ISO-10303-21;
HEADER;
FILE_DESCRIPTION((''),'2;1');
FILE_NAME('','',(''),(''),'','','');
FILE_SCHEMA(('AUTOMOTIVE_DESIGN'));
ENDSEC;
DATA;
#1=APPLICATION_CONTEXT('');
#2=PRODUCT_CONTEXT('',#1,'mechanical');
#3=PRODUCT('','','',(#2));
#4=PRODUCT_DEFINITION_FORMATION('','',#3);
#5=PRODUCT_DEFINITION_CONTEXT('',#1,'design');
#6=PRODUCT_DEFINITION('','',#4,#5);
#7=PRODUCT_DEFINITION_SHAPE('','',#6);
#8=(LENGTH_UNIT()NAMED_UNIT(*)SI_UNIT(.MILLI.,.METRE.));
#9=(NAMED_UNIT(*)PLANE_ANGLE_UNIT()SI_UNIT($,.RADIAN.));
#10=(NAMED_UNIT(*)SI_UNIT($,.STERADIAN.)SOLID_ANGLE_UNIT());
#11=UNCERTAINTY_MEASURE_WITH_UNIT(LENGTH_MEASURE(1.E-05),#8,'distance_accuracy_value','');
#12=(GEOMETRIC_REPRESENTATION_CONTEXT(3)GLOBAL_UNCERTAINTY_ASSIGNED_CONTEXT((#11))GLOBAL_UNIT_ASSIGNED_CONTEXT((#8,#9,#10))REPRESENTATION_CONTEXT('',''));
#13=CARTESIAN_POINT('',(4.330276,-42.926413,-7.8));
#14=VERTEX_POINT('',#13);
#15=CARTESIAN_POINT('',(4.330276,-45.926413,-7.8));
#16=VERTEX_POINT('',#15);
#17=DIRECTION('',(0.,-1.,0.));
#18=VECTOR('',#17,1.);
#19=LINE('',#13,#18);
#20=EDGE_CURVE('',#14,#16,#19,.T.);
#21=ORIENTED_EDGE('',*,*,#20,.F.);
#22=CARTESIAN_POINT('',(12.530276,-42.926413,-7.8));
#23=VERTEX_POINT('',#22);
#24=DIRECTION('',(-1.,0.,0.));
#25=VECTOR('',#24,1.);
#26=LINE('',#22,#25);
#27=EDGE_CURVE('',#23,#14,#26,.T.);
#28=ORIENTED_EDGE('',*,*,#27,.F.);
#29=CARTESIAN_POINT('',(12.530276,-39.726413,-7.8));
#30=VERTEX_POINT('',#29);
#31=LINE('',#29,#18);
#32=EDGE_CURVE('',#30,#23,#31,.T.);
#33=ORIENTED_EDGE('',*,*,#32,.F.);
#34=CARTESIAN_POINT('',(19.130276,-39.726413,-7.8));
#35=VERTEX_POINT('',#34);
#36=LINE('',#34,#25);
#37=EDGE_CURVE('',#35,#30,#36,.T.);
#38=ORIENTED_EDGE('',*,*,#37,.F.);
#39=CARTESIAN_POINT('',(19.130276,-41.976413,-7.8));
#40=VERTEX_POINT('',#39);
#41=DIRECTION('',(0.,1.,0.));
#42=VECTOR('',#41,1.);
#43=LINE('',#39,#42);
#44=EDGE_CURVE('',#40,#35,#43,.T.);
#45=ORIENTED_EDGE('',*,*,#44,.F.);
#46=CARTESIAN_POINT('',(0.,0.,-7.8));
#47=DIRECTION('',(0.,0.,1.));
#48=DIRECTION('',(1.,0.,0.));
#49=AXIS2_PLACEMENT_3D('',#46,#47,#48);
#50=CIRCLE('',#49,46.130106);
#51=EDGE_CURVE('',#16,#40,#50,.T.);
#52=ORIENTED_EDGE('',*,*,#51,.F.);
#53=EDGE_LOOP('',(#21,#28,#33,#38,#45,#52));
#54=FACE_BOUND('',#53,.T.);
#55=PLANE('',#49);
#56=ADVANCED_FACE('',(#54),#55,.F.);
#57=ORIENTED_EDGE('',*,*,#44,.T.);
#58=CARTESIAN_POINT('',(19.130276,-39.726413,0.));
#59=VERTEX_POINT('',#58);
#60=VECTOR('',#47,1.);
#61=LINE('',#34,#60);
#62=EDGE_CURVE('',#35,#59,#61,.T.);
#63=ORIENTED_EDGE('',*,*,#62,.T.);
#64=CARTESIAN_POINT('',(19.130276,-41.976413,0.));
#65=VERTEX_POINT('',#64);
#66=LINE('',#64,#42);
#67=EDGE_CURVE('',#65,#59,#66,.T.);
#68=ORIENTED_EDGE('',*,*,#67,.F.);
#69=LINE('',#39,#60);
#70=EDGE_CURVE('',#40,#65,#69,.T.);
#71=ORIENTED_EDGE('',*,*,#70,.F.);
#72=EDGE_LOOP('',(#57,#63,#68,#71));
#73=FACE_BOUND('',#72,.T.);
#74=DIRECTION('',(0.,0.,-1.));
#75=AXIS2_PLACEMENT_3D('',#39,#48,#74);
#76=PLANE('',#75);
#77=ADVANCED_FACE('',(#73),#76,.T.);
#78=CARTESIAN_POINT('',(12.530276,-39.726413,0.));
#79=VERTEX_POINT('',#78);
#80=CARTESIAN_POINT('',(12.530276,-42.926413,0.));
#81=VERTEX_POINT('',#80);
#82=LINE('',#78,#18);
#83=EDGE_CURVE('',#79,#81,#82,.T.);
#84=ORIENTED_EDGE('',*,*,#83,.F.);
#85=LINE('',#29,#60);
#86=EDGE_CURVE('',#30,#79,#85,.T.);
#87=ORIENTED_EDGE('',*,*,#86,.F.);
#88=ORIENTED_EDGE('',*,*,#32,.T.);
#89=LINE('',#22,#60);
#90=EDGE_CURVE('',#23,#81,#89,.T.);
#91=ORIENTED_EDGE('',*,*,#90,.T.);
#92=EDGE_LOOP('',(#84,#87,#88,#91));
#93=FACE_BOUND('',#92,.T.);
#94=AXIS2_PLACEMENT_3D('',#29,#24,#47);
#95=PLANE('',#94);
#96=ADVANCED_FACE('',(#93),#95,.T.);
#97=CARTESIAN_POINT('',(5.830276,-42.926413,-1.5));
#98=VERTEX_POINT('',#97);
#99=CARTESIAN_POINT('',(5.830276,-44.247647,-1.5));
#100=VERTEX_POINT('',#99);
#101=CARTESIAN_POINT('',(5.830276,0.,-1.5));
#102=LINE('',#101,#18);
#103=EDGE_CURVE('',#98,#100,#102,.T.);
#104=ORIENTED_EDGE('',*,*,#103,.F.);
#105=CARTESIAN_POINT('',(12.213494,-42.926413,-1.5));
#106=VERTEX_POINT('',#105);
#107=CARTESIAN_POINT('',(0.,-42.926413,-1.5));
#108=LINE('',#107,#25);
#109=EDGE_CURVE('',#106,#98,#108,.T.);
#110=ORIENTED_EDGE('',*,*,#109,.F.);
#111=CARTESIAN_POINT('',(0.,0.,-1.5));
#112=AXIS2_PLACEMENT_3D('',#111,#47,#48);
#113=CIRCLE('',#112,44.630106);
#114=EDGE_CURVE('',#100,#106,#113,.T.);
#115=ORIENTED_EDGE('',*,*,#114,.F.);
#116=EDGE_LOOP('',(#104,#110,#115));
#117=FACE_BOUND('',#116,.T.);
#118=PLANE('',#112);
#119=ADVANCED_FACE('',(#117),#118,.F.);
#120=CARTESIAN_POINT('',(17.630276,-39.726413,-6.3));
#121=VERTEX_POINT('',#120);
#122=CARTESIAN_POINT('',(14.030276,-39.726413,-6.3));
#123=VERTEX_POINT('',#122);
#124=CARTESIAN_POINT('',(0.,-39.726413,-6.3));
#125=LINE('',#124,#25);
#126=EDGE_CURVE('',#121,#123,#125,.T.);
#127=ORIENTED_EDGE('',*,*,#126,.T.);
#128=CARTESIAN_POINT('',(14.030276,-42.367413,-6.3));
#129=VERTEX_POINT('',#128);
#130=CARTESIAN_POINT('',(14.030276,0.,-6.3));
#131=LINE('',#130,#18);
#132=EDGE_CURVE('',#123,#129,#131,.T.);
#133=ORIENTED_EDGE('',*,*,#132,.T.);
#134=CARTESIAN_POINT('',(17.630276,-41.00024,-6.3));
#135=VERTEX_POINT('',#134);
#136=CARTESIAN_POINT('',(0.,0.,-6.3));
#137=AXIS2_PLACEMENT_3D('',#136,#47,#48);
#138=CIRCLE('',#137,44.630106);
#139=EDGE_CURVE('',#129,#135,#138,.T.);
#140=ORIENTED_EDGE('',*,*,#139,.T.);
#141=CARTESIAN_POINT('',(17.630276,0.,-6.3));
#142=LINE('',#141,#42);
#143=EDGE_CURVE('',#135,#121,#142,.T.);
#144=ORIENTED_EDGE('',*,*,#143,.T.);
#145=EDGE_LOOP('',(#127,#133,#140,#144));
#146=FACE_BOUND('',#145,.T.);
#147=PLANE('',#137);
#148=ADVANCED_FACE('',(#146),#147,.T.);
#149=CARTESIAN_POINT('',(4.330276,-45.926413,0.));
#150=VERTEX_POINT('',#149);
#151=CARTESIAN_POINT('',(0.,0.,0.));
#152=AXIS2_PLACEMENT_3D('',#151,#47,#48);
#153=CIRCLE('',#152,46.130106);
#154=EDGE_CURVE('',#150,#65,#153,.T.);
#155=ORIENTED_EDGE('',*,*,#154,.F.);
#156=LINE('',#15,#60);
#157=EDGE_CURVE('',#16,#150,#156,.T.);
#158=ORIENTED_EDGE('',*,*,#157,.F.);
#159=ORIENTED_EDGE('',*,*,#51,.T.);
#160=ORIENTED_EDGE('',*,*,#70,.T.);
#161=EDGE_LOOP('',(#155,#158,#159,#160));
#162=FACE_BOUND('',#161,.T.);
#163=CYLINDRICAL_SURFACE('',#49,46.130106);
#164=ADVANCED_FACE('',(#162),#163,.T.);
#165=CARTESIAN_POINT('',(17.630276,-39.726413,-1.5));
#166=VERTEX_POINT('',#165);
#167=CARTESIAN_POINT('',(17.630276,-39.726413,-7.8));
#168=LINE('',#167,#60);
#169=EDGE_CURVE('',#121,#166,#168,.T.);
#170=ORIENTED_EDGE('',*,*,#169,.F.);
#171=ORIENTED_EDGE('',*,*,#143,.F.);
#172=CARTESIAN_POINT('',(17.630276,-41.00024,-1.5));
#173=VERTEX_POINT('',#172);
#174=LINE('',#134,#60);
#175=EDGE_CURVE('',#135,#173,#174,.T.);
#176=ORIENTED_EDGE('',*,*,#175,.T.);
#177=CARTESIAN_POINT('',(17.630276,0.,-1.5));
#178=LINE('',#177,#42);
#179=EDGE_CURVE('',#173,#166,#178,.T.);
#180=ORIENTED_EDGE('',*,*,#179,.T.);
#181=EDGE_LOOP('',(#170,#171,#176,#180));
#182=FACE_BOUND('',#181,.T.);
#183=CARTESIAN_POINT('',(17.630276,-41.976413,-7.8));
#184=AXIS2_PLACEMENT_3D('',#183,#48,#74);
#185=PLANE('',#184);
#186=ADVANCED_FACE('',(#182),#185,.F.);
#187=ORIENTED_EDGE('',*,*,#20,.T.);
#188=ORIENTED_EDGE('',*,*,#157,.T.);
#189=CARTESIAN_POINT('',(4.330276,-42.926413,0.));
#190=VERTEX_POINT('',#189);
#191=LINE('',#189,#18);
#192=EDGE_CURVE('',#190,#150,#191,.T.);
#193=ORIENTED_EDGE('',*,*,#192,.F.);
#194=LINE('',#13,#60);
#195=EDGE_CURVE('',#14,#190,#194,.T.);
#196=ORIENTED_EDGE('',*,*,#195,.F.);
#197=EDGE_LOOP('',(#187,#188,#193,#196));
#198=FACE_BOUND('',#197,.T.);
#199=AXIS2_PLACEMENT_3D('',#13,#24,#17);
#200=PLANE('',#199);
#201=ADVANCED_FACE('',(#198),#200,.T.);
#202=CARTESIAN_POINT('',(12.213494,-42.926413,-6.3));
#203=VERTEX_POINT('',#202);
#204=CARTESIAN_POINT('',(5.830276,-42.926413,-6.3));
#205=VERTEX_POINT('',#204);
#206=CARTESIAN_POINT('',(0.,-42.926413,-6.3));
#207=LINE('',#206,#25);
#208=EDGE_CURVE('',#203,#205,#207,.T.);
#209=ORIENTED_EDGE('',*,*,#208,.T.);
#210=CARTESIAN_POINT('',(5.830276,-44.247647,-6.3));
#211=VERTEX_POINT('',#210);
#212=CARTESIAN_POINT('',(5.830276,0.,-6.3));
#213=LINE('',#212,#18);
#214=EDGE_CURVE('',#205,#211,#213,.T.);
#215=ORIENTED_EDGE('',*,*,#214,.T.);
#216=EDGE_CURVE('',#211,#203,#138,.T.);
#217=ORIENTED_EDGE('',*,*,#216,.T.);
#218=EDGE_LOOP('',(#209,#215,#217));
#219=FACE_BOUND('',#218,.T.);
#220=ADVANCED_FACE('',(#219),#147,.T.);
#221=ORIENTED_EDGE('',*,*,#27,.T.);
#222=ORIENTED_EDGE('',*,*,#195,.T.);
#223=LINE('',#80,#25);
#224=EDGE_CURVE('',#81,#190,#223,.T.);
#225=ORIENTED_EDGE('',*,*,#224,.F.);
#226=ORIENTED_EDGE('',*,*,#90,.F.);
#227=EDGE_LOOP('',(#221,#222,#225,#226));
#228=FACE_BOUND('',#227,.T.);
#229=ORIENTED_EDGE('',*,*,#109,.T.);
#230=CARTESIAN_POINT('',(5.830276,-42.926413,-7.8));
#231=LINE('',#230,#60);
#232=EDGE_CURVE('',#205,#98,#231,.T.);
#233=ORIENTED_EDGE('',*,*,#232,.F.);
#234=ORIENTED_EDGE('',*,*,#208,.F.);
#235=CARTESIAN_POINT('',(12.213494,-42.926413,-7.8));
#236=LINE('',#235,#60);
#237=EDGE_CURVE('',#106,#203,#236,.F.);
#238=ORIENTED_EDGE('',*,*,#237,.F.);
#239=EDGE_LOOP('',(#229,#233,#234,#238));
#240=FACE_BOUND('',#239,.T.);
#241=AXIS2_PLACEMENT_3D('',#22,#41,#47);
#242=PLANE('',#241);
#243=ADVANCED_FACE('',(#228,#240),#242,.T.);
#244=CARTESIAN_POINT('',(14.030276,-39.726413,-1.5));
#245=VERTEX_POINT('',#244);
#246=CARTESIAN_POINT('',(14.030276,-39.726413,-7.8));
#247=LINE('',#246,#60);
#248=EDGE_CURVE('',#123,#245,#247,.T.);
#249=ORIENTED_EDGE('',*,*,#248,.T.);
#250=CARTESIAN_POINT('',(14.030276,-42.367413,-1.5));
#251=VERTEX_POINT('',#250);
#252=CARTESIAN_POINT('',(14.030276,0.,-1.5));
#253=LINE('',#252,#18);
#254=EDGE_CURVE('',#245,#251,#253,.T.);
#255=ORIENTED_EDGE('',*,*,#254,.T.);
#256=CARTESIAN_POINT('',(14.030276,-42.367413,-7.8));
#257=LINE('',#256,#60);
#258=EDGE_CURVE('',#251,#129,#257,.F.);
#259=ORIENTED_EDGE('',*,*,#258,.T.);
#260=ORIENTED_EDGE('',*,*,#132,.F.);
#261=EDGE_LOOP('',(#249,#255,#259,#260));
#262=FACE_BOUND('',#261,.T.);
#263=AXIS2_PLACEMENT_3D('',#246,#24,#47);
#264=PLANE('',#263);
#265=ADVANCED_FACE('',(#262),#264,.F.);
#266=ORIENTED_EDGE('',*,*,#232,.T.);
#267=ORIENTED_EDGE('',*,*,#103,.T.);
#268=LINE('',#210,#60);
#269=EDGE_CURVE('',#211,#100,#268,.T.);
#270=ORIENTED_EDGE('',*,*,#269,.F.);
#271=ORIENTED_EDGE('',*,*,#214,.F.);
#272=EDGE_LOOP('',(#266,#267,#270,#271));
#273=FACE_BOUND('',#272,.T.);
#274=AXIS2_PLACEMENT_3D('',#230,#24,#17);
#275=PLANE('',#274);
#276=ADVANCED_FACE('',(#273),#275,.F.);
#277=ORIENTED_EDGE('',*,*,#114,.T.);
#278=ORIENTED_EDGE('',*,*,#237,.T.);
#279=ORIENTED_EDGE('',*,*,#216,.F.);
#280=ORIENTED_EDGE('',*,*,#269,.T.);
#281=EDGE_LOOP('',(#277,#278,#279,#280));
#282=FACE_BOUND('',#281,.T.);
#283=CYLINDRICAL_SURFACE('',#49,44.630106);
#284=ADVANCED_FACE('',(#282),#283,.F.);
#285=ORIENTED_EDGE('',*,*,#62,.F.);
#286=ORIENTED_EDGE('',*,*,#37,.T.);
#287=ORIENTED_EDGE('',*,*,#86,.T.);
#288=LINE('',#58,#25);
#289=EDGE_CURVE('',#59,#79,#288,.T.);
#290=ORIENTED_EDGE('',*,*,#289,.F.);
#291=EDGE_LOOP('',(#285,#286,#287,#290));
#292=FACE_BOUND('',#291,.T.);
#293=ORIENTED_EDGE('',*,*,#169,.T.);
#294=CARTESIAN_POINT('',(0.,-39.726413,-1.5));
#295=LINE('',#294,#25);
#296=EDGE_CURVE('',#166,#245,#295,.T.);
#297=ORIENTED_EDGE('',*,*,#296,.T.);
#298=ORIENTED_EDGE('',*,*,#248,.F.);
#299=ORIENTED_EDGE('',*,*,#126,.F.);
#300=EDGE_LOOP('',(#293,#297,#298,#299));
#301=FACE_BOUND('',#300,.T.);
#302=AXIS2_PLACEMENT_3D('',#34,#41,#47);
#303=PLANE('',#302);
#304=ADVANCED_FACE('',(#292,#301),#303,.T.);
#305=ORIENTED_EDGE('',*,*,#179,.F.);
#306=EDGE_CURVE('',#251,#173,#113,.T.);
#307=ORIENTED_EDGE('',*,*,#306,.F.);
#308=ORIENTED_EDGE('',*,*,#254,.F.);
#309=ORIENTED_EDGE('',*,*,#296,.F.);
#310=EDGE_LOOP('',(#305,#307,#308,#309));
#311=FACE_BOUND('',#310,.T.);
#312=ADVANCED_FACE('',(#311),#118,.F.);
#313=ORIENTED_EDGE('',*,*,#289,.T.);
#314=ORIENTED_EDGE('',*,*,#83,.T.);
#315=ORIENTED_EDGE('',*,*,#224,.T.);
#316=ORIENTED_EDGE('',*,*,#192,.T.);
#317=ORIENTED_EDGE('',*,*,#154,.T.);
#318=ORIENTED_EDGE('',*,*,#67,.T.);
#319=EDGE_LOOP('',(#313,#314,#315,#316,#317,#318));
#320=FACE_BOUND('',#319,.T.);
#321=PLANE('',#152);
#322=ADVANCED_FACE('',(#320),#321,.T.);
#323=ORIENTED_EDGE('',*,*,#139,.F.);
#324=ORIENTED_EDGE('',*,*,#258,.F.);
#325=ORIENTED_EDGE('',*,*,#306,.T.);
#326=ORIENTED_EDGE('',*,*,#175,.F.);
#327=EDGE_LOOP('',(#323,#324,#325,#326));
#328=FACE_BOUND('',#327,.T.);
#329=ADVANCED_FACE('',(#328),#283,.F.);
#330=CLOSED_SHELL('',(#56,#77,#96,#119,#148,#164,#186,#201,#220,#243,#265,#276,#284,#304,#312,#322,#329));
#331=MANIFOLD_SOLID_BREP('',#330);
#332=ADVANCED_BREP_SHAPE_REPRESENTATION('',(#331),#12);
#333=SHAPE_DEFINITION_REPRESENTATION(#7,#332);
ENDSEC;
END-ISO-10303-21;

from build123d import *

# Parameters (mm, degrees)
BOSS_EXTRUDE1_DEPTH = 7.8
SHELL1_START        = -6.3
SHELL1_DEPTH        = 4.8


# Read off the part's stored shape, not the designer's step: Shell1
with BuildPart() as part:
    # Sketch1 → Boss-Extrude1 (new body)
    with BuildSketch(Plane.XY):
        with BuildLine():
            Line((19.130275644, -41.976412541), (19.130275644, -39.726412541))
            Line((19.130275644, -39.726412541), (12.530275644, -39.726412541))
            Line((12.530275644, -39.726412541), (12.530275644, -42.926412541))
            Line((12.530275644, -42.926412541), (4.330275644, -42.926412541))
            Line((4.330275644, -42.926412541), (4.330275644, -45.926412541))
            ThreePointArc((4.330275644, -45.926412541), (11.895376904, -44.570019793), (19.130275644, -41.976412541))
        make_face()
    extrude(amount=-BOSS_EXTRUDE1_DEPTH)

    # Shell1 outline → Shell1 (cut)
    with BuildSketch(Plane.XY.offset(SHELL1_START)):
        with BuildLine():
            Line((14.030275644, -39.726412541), (14.030275644, -42.367413234))
            ThreePointArc((14.030275644, -42.367413234), (15.845028157, -41.722672751), (17.630275644, -41.000240481))
            Line((17.630275644, -41.000240481), (17.630275644, -39.726412541))
            Line((17.630275644, -39.726412541), (14.030275644, -39.726412541))
        make_face()
        with BuildLine():
            Line((5.830275644, -42.926412541), (5.830275644, -44.247646544))
            ThreePointArc((5.830275644, -44.247646544), (9.046039137, -43.703724266), (12.213494388, -42.926412541))
            Line((12.213494388, -42.926412541), (5.830275644, -42.926412541))
        make_face()
    extrude(amount=SHELL1_DEPTH, mode=Mode.SUBTRACT)


solid = part.part
